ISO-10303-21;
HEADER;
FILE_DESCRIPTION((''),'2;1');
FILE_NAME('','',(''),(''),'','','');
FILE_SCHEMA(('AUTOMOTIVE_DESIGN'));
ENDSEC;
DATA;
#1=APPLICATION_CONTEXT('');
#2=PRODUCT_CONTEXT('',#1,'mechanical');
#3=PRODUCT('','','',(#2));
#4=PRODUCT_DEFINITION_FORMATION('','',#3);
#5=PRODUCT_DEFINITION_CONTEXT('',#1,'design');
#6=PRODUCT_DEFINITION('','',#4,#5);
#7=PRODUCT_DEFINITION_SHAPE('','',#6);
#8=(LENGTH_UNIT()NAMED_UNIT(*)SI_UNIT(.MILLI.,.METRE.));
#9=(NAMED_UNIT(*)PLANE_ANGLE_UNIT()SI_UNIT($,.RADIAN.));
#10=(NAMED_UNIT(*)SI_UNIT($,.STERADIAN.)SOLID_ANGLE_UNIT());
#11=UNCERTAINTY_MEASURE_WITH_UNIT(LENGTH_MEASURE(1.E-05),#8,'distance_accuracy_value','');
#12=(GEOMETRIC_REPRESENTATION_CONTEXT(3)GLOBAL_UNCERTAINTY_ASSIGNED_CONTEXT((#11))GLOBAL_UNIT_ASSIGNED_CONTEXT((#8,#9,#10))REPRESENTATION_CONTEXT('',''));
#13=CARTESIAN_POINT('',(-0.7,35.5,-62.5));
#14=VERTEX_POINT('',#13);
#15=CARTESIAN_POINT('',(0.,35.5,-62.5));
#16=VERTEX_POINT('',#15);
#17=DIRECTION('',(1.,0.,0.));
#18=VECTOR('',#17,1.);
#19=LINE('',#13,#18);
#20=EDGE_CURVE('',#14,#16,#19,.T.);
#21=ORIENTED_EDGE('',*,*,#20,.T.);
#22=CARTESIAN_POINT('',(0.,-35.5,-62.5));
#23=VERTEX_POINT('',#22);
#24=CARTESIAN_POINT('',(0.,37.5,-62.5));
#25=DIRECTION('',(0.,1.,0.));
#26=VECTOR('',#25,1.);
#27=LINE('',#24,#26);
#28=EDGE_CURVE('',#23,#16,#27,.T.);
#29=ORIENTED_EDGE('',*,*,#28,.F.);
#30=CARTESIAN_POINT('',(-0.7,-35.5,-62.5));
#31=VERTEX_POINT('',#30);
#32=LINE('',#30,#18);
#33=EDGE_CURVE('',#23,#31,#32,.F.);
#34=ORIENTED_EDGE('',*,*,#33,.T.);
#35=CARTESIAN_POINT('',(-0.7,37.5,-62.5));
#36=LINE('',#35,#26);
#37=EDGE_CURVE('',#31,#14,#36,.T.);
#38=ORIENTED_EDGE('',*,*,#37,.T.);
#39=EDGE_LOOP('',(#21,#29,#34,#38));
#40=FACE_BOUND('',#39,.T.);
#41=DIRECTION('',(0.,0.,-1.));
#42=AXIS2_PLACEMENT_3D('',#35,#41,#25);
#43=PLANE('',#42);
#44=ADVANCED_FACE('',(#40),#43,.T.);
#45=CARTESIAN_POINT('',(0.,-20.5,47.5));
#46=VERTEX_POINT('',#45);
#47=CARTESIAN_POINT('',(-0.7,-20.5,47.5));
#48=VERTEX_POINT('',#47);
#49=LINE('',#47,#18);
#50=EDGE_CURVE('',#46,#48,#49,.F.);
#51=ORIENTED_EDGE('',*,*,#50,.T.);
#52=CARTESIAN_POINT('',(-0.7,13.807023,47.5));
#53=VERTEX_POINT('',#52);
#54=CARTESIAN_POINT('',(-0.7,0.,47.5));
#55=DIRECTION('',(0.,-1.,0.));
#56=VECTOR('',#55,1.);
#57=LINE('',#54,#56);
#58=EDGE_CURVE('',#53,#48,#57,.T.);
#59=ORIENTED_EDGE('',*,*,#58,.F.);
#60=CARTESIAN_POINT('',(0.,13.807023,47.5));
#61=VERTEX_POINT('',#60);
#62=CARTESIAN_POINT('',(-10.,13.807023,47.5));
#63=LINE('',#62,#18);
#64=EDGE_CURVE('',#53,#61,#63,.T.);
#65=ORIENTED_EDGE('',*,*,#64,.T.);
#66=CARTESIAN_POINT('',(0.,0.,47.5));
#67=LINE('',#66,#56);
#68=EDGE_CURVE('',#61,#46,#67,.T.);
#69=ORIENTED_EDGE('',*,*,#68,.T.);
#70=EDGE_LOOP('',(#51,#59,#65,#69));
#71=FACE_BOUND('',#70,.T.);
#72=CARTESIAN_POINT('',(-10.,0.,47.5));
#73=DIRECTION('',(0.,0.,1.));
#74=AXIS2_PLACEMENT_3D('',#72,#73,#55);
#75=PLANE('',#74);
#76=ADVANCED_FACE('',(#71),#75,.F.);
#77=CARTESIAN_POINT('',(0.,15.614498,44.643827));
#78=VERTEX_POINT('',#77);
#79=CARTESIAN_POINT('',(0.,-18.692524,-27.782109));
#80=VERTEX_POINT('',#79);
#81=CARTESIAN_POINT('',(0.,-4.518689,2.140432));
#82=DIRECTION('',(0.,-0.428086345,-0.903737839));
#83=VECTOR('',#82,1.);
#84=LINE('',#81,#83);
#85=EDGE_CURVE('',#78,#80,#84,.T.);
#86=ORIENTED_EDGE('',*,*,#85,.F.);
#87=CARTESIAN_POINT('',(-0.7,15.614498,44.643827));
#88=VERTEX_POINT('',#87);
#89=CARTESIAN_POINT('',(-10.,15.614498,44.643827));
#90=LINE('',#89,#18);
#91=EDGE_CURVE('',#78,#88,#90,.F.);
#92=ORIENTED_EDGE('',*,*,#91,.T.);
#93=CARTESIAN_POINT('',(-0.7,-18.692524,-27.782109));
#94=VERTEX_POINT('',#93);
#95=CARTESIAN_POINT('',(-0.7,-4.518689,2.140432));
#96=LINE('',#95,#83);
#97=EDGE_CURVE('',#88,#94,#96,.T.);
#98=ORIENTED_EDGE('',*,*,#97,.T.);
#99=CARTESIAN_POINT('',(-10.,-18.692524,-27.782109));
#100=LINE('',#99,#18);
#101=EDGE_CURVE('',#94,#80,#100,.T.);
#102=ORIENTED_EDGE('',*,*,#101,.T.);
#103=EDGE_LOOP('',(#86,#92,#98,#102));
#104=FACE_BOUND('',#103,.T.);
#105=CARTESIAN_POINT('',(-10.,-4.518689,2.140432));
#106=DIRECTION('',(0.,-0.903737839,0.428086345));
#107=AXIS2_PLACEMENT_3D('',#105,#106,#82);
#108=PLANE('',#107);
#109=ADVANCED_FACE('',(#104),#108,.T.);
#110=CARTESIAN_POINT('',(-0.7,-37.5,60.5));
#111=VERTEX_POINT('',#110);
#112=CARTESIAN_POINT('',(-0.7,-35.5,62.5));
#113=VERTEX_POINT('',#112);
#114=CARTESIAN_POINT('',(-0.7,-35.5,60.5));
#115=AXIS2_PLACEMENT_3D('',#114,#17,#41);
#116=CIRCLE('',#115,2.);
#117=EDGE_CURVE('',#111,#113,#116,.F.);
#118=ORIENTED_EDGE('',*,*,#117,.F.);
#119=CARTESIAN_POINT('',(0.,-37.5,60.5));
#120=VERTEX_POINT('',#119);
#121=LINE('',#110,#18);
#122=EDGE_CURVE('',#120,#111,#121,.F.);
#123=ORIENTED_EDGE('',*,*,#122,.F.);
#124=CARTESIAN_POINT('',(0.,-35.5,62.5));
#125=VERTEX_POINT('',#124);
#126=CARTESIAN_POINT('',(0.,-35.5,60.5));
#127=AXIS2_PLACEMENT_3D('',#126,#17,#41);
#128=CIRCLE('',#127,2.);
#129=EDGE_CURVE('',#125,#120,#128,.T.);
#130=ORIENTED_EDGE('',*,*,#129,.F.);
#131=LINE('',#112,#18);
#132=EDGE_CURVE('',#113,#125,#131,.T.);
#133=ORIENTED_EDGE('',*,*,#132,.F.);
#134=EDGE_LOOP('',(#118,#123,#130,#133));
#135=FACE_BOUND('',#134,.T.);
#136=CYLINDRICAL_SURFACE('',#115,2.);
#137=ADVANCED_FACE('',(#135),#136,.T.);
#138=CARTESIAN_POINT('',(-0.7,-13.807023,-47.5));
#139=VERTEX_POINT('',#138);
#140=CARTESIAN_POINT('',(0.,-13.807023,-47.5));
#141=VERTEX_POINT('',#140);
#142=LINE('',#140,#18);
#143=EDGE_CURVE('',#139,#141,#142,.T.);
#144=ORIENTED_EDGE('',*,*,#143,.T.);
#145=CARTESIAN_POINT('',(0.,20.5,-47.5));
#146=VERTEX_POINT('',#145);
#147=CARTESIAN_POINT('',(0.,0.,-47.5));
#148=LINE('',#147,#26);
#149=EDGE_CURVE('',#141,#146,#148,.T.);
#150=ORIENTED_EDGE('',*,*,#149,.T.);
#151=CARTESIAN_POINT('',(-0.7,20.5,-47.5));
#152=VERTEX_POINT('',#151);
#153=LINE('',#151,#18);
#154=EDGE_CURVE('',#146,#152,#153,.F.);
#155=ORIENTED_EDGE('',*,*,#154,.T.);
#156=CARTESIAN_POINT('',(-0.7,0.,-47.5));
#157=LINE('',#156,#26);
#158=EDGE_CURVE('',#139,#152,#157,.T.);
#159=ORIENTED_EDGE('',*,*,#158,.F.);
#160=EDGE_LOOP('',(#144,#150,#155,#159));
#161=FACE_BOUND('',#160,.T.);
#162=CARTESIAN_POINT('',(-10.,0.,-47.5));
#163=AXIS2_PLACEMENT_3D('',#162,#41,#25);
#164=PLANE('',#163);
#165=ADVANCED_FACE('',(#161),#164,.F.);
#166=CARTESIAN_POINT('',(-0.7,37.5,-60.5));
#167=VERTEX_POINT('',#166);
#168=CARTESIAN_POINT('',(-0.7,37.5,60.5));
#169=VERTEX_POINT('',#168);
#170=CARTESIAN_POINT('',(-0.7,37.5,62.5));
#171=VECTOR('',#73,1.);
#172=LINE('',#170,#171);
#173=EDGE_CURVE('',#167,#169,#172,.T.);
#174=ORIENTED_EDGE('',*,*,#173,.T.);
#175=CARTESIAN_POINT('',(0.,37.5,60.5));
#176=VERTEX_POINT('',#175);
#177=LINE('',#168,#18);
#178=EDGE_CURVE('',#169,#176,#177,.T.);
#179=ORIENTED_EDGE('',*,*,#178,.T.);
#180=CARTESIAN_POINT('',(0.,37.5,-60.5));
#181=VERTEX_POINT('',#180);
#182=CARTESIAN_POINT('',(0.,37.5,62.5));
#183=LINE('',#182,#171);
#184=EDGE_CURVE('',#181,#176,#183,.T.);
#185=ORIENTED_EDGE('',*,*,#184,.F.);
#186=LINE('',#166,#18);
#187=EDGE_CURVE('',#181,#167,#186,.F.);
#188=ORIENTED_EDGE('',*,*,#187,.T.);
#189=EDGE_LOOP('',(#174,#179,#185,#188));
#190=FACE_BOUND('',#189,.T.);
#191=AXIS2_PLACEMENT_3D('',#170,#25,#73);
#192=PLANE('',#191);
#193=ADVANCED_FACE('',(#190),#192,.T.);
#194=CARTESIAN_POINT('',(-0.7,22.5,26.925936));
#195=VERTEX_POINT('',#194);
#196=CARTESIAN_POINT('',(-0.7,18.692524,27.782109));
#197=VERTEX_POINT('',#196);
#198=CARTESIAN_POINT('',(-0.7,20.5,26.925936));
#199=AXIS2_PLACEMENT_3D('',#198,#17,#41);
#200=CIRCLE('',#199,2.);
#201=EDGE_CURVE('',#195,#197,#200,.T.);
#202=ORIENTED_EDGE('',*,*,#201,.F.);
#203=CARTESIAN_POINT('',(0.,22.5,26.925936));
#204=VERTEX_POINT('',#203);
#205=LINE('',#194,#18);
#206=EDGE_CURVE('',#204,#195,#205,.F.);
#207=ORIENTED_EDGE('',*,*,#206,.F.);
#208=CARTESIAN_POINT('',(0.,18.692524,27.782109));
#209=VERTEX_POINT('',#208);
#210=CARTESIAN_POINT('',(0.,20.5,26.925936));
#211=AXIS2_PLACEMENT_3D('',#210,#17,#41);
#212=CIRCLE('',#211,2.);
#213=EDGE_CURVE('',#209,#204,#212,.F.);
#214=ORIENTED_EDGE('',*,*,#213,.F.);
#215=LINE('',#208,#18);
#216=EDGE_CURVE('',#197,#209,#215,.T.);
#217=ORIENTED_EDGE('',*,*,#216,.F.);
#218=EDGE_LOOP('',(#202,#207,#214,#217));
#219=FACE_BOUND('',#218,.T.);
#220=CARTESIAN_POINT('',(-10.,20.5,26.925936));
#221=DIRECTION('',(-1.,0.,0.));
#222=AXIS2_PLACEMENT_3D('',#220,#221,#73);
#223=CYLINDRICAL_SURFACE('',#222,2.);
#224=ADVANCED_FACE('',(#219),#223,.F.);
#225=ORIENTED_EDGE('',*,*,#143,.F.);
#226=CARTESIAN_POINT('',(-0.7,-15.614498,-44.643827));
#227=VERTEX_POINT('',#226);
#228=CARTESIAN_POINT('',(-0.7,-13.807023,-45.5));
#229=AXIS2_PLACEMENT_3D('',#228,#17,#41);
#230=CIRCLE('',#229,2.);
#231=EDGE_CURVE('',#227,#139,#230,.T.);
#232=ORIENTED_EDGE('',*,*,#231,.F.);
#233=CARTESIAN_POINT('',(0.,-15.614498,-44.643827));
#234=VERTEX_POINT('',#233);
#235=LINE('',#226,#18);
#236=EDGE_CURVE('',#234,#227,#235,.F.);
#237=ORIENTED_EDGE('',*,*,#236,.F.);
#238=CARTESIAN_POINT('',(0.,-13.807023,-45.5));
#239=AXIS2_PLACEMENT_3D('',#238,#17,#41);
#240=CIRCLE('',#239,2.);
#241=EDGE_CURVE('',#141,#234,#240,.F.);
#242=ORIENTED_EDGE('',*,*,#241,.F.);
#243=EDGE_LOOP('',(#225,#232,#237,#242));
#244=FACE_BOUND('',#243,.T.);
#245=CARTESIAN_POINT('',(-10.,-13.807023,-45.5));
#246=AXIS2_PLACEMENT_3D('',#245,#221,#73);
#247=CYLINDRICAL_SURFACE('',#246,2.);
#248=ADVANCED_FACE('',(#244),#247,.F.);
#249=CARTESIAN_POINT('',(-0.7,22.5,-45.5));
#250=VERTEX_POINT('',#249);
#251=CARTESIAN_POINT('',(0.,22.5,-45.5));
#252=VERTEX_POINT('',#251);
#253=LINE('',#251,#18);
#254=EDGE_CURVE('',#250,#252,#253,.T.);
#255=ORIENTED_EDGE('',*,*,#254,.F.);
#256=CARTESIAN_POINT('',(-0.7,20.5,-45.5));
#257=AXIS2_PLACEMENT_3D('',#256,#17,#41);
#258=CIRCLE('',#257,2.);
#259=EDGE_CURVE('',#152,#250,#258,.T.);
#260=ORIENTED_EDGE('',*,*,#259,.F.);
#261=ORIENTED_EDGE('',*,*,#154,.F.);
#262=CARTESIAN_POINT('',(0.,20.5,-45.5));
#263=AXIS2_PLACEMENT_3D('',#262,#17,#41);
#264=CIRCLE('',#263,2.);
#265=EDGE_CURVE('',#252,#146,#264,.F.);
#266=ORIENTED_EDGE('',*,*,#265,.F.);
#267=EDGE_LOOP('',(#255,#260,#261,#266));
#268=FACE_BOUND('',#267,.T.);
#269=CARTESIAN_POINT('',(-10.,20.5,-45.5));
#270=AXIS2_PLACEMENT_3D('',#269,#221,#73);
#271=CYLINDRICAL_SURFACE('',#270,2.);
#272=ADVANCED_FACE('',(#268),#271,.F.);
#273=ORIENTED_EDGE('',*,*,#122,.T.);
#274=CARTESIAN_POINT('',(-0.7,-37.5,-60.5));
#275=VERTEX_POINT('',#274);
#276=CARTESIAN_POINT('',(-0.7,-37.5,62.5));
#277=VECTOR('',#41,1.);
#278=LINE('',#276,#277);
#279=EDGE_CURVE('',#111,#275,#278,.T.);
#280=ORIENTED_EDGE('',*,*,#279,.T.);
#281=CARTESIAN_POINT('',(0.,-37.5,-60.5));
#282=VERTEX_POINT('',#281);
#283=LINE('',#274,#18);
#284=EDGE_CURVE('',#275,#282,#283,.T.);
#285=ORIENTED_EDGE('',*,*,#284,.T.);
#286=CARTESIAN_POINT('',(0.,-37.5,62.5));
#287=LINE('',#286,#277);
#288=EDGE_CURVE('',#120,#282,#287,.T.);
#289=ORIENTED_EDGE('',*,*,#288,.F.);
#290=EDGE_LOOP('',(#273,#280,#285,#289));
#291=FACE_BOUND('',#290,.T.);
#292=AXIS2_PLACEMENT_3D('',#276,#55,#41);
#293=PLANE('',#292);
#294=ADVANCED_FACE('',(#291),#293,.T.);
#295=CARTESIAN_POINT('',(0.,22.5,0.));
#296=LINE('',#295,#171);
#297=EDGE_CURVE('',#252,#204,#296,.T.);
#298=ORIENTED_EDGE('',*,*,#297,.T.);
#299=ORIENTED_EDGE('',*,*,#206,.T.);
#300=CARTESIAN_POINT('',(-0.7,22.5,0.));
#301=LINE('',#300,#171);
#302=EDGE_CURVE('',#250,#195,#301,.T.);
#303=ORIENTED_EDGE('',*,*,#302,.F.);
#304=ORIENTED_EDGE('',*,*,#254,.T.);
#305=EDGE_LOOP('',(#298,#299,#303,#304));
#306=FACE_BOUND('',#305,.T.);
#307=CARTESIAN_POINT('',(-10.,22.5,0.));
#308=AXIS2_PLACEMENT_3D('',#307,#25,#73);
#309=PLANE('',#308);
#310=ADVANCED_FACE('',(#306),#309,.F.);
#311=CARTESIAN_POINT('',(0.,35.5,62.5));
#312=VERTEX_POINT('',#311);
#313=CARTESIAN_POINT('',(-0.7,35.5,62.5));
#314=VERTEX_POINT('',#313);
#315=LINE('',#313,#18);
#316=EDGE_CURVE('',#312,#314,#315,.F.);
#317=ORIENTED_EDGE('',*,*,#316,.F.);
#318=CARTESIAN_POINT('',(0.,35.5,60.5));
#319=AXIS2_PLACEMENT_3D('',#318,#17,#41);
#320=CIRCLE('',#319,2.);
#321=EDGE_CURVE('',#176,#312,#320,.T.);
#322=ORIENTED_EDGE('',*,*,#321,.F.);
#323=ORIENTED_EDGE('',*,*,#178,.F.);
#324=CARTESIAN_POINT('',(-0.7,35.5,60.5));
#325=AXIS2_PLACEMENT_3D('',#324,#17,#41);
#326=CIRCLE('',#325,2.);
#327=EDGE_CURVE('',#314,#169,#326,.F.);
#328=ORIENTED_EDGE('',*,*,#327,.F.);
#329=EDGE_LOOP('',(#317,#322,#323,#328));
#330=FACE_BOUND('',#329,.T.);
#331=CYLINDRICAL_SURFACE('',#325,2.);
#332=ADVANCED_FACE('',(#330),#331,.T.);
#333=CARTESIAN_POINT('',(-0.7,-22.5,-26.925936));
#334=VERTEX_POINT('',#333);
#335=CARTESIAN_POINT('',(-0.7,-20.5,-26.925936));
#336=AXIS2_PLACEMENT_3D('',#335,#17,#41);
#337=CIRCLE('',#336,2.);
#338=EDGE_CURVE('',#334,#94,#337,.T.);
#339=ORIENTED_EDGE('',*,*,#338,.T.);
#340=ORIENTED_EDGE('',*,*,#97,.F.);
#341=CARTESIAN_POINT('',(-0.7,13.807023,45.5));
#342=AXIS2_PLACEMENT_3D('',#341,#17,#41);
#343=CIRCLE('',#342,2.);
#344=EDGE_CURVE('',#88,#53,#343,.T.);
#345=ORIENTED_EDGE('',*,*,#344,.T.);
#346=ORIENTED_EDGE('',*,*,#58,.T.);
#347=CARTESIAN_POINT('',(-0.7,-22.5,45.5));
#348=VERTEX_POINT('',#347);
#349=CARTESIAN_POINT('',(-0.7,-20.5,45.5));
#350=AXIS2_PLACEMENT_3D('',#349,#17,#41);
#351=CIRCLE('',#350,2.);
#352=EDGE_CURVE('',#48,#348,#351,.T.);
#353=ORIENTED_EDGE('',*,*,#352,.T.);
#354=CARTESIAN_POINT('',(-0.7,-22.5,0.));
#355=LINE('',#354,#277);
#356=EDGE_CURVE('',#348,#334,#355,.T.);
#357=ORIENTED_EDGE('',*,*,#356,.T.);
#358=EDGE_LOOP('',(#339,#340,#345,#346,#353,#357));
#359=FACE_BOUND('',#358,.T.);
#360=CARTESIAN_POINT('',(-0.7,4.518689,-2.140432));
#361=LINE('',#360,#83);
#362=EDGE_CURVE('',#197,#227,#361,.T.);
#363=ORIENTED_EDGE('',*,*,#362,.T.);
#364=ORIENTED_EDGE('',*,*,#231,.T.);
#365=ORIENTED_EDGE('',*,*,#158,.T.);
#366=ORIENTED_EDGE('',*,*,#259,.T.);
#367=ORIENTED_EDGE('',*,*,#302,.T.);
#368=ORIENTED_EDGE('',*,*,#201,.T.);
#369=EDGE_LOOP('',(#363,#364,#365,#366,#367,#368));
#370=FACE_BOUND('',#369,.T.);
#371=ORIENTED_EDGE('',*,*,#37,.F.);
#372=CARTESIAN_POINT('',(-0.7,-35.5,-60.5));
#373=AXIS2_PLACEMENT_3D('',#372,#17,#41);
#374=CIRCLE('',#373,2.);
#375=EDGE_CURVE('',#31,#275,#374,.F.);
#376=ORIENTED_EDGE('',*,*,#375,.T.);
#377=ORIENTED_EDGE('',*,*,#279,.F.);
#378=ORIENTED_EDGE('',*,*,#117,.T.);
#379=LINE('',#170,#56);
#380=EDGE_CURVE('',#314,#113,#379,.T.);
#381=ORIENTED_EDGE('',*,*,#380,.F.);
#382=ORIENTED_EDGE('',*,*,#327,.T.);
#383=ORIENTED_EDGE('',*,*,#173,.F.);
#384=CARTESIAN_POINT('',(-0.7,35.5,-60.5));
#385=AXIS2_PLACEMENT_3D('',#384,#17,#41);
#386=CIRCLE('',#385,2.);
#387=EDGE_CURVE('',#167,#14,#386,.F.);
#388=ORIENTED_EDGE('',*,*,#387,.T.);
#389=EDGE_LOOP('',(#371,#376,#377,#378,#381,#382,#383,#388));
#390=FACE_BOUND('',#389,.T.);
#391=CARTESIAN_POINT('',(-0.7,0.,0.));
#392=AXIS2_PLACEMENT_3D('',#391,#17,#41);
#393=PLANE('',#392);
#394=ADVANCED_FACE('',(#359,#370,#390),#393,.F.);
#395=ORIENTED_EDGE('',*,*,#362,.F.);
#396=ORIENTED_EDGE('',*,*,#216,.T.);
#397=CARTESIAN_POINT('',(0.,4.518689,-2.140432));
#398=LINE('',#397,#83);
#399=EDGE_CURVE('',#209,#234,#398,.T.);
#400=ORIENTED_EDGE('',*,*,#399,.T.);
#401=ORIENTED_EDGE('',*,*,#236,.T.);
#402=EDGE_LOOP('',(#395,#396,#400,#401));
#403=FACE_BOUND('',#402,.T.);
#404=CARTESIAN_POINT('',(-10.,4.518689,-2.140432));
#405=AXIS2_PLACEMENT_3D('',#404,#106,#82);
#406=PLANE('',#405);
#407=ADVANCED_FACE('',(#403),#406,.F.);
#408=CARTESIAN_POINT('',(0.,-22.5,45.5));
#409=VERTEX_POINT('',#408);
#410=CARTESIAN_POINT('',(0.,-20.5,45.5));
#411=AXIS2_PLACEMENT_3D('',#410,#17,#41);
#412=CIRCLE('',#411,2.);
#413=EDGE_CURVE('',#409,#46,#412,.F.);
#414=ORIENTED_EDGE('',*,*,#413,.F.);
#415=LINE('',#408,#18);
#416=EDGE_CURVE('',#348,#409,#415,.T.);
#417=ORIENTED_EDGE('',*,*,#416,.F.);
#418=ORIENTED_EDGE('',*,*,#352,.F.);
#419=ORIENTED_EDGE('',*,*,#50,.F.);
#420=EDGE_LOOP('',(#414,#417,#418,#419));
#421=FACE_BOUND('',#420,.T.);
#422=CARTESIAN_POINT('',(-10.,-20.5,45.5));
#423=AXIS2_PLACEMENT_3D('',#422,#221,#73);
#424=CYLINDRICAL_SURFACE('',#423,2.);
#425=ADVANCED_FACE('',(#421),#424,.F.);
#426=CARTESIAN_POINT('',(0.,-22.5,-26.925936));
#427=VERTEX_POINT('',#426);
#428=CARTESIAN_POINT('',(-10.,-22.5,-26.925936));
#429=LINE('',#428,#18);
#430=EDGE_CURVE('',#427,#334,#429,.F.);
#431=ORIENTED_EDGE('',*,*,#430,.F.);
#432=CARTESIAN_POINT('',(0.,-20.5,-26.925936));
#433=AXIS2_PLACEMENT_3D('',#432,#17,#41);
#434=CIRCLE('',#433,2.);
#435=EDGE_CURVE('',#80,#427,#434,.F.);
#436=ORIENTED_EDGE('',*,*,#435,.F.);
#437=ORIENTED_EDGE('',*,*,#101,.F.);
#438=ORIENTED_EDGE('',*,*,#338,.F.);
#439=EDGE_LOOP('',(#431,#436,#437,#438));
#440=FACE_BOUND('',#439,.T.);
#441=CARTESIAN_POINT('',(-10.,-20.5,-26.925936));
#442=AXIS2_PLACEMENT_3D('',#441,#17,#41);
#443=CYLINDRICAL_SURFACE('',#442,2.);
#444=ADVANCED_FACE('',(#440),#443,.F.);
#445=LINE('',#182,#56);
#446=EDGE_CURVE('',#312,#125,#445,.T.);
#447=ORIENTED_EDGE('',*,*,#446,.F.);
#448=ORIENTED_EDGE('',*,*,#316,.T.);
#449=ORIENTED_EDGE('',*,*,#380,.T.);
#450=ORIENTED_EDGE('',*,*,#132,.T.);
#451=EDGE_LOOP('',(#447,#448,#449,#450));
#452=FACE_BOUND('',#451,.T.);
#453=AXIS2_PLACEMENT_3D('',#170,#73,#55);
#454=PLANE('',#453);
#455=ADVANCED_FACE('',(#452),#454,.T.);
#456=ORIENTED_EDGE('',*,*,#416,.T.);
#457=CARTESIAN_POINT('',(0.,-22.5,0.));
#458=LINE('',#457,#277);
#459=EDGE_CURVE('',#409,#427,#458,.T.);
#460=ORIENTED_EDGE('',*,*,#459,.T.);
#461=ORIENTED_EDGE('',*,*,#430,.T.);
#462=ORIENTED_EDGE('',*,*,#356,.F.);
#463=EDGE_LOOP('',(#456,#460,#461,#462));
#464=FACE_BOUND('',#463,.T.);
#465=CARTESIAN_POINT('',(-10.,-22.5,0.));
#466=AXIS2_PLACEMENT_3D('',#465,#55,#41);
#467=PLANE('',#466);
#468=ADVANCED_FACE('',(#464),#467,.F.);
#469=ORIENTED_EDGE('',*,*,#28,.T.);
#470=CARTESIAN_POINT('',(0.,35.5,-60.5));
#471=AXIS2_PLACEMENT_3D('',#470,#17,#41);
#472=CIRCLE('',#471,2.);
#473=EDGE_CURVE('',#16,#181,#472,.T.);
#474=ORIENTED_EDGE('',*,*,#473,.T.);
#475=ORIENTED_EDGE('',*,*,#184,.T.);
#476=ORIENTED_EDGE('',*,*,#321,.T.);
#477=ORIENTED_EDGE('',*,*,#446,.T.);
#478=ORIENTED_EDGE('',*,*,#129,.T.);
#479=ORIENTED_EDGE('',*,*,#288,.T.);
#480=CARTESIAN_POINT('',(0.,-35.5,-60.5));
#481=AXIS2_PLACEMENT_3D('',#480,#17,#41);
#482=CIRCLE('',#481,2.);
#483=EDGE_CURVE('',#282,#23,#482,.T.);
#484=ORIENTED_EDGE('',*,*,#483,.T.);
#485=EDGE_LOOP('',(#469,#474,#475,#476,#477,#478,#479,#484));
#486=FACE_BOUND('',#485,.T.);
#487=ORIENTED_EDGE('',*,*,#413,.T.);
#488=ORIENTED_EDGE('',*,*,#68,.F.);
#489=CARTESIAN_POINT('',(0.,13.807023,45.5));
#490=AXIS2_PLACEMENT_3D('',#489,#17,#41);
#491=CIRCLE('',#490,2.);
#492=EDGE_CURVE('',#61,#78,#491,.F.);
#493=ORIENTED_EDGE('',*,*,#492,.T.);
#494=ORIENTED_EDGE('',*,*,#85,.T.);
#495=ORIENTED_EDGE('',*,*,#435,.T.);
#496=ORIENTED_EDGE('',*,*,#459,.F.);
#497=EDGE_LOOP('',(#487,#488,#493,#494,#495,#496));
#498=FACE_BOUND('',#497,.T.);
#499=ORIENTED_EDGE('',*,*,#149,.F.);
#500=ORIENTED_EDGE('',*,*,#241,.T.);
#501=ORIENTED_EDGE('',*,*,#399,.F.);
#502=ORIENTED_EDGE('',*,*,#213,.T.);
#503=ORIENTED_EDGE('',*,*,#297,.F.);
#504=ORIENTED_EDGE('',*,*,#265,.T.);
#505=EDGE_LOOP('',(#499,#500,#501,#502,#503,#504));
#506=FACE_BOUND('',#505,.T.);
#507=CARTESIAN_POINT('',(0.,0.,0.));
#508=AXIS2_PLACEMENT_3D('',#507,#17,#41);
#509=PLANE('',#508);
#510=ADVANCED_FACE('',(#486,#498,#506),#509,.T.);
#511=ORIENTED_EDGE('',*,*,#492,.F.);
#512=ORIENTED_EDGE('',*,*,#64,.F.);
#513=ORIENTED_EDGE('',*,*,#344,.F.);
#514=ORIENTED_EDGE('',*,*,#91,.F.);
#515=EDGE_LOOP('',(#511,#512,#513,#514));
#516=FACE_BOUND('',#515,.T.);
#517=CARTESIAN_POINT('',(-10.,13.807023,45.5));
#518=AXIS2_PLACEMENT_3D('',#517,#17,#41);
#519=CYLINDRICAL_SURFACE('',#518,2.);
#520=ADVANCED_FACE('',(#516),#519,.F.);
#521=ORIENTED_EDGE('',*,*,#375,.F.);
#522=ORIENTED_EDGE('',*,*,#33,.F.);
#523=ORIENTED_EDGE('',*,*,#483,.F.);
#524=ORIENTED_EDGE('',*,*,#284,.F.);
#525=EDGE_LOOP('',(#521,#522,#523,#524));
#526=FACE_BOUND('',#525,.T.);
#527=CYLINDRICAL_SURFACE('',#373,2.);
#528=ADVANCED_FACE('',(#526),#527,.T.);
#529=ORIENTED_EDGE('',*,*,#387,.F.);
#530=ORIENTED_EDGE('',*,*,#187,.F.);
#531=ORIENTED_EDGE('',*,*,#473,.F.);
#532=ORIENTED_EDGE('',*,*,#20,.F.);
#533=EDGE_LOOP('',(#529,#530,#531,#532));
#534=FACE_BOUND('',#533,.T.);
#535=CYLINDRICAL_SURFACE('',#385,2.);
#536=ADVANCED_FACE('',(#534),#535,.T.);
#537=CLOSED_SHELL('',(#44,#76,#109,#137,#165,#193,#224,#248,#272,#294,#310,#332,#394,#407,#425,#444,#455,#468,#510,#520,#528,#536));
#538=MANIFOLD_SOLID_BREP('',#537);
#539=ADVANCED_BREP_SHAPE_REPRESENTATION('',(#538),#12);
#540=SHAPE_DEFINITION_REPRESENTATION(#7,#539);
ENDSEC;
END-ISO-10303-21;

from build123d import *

# Parameters (mm, degrees)
SKETCH1_W          = 125
SKETCH1_H          = 75
BASE_FLANGE1_DEPTH = 0.7
CUT_EXTRUDE1_DEPTH = 10
FILLET1_R          = 2


# Sheet-metal steps are written as plain solids
with BuildPart() as part:
    # Sketch1 → Base-Flange1 (new body)
    with BuildSketch(Plane(origin=(0, 0, 0), x_dir=(0, 0, -1), z_dir=(1, 0, 0))):
        Rectangle(SKETCH1_W, SKETCH1_H)
    extrude(amount=-BASE_FLANGE1_DEPTH)

    # Sketch10 → Cut-Extrude1 (cut)
    with BuildSketch(Plane(origin=(0, 0, 0), x_dir=(0, 0, -1), z_dir=(1, 0, 0))):
        Polygon((35.82011331, -22.5), (-47.5, 16.967422094), (-47.5, -22.5), align=None)
        Polygon((47.5, 22.5), (-35.82011331, 22.5), (47.5, -16.967422094), align=None)
    extrude(amount=-CUT_EXTRUDE1_DEPTH, mode=Mode.SUBTRACT)

    # Fillet1
    fillet1_edges = [part.edges().sort_by_distance(p)[0] for p in [
        (-0.35, 16.967422094, 47.5),
        (-0.35, -22.5, -35.82011331),
        (-0.35, -22.5, 47.5),
        (-0.35, 22.5, 35.82011331),
        (-0.35, 22.5, -47.5),
        (-0.35, -16.967422094, -47.5),
        (-0.35, -37.5, -62.5),
        (-0.35, -37.5, 62.5),
        (-0.35, 37.5, 62.5),
        (-0.35, 37.5, -62.5),
    ]]
    fillet(fillet1_edges, radius=FILLET1_R)


solid = part.part
